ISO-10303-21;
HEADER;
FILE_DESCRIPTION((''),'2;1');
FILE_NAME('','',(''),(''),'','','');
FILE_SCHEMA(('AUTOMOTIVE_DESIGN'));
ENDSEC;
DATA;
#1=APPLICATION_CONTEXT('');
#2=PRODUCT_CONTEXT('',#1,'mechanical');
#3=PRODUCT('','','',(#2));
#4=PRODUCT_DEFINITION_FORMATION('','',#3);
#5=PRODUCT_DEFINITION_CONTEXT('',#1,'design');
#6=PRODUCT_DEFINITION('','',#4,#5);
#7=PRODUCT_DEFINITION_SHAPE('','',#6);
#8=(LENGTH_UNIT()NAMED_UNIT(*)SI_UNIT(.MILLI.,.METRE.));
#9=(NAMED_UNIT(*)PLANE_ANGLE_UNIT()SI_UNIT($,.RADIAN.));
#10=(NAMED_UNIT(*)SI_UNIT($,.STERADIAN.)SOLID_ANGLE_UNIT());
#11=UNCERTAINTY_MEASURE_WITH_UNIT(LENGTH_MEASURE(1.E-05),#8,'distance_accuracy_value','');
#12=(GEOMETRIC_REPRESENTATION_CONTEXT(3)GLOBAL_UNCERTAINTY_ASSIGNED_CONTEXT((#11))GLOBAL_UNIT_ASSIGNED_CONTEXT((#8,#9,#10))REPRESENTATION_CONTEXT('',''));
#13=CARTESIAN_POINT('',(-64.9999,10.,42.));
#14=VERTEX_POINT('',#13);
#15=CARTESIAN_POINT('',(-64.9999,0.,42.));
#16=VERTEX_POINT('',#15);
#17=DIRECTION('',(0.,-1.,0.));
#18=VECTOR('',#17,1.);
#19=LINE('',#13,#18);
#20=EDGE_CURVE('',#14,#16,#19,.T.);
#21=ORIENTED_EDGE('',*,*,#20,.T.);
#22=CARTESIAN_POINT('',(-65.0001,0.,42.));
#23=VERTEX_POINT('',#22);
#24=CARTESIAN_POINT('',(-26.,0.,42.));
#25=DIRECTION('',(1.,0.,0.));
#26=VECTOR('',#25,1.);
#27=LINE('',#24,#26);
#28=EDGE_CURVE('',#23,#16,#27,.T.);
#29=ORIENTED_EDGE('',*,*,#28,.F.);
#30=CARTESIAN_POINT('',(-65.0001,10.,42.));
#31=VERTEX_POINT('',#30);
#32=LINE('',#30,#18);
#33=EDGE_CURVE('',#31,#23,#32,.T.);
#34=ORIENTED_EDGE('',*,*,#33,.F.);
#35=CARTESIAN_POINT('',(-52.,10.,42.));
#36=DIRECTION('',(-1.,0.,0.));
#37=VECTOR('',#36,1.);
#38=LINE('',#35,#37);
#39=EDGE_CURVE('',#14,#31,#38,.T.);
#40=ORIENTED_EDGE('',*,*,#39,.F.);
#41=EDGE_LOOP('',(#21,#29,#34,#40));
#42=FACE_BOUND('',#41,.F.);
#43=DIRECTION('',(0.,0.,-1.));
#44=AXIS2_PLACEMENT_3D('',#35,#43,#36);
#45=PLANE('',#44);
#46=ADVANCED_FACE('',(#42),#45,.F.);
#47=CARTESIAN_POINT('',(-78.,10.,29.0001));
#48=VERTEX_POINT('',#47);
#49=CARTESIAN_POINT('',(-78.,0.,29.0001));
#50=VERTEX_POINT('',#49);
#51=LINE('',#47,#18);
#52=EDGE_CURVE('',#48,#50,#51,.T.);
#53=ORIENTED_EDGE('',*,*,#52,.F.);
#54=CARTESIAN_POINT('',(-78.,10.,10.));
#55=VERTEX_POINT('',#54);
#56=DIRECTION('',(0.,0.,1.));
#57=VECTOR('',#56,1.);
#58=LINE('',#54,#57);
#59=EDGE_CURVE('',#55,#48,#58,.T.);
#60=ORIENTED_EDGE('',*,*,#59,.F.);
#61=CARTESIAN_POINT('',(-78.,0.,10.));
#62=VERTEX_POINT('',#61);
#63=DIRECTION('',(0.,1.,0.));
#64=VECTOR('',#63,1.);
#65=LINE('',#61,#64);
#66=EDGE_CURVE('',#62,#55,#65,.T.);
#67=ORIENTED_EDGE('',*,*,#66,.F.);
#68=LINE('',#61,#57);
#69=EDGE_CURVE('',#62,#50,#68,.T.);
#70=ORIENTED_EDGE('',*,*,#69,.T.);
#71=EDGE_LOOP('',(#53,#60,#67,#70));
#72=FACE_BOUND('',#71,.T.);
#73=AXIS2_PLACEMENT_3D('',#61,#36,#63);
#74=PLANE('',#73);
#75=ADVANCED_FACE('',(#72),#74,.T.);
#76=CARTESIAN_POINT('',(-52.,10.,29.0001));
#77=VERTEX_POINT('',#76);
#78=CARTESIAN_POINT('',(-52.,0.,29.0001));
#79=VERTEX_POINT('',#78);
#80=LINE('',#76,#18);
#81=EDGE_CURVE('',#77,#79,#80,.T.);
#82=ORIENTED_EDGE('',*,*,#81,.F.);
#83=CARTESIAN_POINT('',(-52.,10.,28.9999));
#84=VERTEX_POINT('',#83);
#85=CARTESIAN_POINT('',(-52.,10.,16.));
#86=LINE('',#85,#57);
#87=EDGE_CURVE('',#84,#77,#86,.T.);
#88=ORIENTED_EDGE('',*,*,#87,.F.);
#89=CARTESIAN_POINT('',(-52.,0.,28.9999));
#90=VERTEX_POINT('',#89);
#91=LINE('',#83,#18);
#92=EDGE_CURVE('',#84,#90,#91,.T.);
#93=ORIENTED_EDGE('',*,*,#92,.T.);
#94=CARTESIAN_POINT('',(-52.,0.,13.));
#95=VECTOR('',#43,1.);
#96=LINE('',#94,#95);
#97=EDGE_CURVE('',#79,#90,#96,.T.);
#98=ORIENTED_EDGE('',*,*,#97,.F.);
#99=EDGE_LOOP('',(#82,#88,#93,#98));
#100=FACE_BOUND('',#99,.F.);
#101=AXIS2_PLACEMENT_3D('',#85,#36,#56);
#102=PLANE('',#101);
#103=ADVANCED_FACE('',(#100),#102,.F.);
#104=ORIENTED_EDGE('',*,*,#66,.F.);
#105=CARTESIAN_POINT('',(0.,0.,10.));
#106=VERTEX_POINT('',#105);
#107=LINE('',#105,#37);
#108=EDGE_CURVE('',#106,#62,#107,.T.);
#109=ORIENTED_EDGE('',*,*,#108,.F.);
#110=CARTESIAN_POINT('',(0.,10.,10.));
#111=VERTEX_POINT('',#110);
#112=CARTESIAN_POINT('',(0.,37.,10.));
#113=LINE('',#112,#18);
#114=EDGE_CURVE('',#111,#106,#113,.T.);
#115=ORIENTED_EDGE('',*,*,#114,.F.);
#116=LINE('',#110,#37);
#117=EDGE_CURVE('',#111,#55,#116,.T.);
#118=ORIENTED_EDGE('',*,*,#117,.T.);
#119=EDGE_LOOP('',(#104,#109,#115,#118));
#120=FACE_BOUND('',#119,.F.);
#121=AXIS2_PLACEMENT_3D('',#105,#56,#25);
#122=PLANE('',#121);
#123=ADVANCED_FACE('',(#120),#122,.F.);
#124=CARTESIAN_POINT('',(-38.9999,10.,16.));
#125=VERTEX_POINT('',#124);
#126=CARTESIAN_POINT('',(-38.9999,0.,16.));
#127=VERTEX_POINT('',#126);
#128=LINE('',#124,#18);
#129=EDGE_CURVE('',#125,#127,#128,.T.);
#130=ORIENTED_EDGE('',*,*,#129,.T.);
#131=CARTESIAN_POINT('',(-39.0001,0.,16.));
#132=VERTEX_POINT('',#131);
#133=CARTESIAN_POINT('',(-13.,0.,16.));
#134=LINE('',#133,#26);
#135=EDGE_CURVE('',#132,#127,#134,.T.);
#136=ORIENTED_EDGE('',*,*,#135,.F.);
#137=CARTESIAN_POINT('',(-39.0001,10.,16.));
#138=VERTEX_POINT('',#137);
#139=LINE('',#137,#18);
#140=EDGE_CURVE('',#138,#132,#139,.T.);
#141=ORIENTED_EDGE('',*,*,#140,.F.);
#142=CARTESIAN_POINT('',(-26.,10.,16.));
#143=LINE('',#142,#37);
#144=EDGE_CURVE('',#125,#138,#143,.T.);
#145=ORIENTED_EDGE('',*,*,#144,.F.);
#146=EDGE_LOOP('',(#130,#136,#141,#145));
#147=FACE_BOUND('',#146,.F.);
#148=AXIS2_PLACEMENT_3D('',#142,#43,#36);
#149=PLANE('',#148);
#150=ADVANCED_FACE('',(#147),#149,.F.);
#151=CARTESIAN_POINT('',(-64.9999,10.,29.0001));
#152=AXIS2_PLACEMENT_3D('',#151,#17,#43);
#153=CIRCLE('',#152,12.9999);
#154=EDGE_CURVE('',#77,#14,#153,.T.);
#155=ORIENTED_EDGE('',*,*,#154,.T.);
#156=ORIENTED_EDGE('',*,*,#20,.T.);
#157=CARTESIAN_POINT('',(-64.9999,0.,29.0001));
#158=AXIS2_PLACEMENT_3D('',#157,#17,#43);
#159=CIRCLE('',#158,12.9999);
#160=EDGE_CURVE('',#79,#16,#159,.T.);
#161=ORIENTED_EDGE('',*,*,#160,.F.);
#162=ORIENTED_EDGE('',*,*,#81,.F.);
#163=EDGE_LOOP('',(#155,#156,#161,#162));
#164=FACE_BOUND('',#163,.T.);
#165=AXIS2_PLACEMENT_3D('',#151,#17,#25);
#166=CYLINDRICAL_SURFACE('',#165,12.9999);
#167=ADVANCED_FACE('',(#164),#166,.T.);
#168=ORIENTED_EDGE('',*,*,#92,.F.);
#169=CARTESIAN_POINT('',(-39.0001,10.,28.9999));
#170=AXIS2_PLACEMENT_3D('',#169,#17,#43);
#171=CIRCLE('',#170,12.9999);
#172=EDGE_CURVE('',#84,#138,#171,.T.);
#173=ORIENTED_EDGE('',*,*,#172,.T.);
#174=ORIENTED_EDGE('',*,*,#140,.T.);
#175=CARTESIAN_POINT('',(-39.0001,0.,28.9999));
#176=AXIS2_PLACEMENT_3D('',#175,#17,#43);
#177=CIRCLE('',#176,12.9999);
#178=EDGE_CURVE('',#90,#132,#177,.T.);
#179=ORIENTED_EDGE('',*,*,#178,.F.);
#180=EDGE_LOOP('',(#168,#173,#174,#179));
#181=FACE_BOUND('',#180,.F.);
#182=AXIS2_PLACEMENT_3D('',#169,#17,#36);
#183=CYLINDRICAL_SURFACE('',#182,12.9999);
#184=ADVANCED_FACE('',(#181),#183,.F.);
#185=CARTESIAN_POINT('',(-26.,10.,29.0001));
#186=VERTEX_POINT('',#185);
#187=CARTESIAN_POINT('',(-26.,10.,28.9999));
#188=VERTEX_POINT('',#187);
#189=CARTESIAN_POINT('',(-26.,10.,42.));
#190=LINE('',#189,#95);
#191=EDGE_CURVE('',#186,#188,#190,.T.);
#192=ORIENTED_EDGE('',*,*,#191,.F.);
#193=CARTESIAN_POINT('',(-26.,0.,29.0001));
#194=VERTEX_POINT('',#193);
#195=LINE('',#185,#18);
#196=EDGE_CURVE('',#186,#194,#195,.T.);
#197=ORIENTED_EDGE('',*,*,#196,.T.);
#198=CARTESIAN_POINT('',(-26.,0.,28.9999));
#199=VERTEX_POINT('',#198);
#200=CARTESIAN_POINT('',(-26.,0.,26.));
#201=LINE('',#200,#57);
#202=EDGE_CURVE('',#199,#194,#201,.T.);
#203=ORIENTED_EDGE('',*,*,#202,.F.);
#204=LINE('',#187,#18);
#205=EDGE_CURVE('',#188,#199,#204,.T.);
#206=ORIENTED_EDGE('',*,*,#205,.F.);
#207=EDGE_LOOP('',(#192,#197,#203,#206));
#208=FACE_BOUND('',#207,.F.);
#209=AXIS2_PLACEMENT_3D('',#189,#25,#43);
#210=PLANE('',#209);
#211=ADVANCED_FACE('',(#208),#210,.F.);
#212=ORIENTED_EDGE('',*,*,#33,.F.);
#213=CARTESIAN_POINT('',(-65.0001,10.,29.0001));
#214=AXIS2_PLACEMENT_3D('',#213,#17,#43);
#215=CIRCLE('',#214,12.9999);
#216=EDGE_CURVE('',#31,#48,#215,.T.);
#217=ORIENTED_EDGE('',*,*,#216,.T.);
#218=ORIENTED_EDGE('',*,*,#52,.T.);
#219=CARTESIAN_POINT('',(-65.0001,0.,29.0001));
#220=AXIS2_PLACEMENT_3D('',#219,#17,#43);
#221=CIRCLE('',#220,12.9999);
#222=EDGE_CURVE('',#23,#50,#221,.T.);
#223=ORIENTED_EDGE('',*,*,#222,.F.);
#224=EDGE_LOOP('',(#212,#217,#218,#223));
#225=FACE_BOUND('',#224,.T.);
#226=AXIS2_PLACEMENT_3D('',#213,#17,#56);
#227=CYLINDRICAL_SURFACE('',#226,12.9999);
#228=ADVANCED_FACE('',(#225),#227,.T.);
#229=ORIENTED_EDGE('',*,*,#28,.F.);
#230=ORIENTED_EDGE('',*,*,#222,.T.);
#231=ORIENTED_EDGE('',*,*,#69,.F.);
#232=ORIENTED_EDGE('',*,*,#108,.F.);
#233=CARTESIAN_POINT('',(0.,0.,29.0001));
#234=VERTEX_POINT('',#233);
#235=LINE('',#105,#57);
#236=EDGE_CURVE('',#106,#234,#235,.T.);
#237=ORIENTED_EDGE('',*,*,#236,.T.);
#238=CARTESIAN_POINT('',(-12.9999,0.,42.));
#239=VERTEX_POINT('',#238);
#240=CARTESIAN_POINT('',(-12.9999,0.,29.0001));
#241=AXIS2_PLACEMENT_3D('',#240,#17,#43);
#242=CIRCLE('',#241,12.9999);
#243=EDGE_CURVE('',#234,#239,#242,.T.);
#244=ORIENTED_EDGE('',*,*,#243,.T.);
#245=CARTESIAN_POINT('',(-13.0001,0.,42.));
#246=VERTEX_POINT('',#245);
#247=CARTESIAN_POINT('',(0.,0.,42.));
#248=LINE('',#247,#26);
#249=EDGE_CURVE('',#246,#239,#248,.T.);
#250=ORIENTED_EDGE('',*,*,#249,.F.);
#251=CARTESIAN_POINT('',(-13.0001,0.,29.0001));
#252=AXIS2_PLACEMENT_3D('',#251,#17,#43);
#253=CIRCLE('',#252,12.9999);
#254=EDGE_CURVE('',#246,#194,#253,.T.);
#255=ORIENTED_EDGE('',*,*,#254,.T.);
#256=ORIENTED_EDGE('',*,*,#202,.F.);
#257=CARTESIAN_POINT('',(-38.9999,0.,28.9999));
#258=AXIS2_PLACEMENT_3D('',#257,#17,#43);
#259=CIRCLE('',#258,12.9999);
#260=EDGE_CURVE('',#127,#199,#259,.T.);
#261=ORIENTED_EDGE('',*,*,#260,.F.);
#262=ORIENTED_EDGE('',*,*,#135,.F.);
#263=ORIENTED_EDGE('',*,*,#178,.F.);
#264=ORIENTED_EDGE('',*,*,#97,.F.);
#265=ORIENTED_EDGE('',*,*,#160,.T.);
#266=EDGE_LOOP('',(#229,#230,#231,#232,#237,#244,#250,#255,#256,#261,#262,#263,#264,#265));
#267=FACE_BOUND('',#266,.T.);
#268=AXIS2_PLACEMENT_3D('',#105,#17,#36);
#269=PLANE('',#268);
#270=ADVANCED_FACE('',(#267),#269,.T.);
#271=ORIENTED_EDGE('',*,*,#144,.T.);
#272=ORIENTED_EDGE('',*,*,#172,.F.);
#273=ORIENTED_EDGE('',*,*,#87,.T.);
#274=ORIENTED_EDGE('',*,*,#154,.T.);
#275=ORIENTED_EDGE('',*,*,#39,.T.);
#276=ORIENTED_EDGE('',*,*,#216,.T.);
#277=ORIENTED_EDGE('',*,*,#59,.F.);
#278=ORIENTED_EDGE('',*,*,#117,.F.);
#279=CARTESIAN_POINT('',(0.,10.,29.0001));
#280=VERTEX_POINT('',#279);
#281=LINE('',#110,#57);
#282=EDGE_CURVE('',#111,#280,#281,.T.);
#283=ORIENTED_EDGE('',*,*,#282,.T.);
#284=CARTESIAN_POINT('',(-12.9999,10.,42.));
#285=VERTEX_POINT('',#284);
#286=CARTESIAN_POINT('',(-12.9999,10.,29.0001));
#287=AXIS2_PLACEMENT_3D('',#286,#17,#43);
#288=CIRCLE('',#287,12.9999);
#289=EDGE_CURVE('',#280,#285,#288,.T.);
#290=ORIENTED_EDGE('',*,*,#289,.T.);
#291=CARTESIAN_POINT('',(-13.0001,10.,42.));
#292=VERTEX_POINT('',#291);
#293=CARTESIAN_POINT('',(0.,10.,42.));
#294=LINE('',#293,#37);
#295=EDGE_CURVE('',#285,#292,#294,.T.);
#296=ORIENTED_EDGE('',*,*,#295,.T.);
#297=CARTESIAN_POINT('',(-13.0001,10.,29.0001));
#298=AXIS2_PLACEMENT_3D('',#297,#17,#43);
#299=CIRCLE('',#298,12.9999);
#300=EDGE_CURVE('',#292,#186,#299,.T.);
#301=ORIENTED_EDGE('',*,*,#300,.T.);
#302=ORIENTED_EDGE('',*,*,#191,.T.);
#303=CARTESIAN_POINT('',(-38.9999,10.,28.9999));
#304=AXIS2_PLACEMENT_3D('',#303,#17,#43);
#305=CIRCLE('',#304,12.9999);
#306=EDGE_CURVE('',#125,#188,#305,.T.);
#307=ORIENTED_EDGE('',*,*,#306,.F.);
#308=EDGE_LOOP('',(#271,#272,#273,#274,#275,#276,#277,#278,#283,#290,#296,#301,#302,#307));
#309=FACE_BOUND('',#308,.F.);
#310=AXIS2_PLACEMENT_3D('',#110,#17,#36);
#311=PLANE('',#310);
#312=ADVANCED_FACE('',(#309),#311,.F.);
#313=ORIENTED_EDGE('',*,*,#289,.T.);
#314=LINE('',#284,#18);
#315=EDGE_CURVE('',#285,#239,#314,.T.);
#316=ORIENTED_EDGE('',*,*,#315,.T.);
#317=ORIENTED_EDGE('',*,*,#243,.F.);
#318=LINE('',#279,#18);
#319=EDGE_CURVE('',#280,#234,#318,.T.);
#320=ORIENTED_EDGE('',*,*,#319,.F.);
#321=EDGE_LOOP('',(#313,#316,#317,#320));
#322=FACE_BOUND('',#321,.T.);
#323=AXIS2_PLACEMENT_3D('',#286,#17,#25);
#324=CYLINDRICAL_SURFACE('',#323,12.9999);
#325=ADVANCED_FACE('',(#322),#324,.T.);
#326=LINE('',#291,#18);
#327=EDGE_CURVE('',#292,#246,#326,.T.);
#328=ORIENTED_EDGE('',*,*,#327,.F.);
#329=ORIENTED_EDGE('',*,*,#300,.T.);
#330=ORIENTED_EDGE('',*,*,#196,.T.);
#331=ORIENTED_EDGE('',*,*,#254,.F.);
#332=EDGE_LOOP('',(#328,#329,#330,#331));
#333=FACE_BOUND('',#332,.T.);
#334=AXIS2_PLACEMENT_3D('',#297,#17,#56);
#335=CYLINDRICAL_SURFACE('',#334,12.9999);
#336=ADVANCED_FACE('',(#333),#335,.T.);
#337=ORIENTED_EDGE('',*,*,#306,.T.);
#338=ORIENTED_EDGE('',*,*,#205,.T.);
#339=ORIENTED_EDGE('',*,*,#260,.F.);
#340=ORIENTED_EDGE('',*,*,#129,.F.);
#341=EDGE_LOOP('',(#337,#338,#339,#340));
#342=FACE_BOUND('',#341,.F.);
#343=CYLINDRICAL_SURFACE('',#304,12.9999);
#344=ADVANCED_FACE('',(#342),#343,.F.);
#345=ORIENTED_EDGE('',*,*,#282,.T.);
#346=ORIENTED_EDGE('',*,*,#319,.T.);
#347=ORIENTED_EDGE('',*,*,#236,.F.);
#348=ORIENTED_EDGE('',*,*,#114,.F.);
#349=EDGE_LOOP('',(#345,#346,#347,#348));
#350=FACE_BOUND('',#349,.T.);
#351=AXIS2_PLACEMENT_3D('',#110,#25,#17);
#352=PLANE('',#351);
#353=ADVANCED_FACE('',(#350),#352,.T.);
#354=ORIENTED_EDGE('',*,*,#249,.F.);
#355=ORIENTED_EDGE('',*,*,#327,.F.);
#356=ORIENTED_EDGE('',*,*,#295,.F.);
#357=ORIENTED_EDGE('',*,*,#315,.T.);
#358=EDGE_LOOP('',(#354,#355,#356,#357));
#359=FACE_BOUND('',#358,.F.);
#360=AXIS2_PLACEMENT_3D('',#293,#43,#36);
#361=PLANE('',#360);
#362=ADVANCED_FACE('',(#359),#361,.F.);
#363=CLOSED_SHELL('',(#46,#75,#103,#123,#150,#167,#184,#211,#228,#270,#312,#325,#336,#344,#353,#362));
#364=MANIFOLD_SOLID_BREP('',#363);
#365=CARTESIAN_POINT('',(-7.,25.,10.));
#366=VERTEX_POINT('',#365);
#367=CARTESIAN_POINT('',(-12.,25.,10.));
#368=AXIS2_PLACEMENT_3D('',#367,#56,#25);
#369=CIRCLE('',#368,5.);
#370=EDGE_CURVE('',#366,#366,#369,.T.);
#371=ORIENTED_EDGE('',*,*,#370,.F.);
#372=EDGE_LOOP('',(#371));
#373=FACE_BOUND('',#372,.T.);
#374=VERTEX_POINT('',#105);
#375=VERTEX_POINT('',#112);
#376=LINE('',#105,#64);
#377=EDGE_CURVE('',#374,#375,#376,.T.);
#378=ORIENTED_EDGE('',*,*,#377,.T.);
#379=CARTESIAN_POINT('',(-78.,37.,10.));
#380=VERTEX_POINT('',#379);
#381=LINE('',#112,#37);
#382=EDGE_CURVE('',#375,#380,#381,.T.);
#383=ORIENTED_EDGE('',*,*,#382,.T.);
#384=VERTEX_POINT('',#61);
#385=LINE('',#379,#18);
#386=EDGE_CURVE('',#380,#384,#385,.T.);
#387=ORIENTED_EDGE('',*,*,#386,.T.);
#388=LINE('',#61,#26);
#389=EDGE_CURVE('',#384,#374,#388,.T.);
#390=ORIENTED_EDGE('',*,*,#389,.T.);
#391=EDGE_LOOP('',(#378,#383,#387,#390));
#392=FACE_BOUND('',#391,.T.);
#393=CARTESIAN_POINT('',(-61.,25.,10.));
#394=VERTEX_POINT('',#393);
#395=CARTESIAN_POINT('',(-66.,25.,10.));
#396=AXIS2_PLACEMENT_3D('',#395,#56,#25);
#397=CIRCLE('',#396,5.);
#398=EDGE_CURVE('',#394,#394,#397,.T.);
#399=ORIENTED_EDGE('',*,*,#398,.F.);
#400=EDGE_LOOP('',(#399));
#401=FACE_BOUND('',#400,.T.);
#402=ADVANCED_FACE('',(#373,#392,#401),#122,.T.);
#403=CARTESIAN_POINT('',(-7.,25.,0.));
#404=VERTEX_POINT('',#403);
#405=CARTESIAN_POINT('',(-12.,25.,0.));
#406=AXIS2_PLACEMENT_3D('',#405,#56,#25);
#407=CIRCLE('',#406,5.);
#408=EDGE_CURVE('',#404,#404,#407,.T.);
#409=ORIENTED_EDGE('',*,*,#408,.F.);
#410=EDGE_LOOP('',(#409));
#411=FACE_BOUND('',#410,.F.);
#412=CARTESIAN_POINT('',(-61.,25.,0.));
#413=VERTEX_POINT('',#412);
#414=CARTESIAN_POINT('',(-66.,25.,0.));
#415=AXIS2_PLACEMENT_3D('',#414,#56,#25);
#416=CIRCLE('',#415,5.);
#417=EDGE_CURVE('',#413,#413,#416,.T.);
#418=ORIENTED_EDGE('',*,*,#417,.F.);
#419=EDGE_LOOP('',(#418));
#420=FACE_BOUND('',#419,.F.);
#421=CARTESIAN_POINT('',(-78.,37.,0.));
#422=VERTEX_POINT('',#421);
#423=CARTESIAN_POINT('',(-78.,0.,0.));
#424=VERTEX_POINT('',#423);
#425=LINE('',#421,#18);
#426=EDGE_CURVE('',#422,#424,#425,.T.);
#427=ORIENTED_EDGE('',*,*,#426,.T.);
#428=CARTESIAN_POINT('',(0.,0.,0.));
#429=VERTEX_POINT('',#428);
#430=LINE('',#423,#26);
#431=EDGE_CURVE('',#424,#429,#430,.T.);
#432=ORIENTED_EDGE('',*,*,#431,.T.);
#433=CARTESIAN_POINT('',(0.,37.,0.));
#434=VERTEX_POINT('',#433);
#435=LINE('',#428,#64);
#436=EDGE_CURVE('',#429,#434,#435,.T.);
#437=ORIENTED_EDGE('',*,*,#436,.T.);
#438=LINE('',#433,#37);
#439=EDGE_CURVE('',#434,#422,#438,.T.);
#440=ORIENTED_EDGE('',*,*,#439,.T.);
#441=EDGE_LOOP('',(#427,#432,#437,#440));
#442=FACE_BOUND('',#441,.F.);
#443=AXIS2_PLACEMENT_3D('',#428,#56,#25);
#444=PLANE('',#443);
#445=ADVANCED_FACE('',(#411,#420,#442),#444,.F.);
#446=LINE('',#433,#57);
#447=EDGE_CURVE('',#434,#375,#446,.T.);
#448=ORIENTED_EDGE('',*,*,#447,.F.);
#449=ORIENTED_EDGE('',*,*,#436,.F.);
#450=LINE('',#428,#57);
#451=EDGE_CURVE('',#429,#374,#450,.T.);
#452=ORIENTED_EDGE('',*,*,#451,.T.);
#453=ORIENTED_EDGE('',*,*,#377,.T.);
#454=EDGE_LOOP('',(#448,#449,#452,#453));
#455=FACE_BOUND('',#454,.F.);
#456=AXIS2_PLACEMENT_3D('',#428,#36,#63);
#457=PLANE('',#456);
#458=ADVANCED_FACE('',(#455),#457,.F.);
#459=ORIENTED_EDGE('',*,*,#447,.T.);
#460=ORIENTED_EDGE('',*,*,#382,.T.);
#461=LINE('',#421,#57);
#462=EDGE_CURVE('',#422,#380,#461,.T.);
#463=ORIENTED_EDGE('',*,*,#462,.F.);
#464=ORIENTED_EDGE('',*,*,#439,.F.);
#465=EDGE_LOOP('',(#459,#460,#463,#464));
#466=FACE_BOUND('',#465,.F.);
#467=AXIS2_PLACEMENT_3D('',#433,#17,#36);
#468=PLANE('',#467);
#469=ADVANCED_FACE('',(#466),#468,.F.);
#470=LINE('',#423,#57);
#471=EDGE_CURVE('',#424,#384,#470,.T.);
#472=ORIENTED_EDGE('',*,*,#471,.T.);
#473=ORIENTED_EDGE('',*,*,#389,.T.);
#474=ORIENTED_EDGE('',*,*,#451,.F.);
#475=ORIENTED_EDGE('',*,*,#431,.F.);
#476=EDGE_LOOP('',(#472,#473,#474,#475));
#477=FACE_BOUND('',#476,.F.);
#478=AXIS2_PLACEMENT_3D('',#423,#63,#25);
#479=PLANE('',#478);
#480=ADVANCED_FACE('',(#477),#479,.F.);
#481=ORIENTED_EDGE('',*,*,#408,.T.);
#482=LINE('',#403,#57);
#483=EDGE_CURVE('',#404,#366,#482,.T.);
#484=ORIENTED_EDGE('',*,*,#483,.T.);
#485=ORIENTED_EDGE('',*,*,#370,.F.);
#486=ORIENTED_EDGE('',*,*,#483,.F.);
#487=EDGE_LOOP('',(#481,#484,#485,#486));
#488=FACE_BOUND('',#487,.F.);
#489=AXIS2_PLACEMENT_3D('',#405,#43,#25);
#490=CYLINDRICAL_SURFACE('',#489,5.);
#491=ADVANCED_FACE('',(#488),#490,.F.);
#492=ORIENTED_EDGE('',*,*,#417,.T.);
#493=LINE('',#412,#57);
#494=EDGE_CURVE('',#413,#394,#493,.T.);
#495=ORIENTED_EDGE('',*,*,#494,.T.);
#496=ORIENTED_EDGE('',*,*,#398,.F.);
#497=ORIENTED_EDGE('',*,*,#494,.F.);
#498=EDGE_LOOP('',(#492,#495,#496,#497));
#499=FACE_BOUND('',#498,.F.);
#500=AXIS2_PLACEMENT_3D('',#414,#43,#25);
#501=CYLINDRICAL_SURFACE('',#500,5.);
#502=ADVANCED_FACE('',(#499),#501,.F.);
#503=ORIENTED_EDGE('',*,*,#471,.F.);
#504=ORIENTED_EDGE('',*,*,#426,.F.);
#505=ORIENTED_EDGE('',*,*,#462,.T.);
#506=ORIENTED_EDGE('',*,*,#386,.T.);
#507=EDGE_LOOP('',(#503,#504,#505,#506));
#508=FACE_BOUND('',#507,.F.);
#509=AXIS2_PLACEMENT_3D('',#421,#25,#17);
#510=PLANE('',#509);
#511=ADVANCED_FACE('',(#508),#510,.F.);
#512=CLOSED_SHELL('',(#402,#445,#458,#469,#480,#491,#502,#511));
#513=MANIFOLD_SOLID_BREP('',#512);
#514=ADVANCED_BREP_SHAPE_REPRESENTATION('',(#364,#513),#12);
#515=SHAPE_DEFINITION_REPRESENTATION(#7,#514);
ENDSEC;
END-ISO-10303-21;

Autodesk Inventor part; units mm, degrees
ref_plane "YZ Plane" through (0, 0, 0) normal (1, 0, 0) x (0, 1, 0)
ref_plane "XZ Plane" through (0, 0, 0) normal (0, 1, 0) x (-1, 0, 0)
ref_plane "XY Plane" through (0, 0, 0) normal (0, 0, 1) x (1, 0, 0)
sketch "Sketch1" plane through (0, 0, 0) normal (0, 0, 1) x (1, 0, 0)
  line L0 (0, 37) -> (-78, 37)
  line L1 (-78, 37) -> (-78, 0)
  line L2 (-78, 0) -> (0, 0)
  line L3 (0, 0) -> (0, 37)
  circle A0 centre (-12, 25) radius 5
  circle A1 centre (-66, 25) radius 5
  point P0 (-39, 0)
  dimension "d0" = 78
  dimension "d1" = 37
  dimension "d2" = 10
  dimension "d3" = 12
  dimension "d4" = 12
  dimension "d5" = 12
  dimension "d6" = 12
extrude "Extrusion1" add sketch "Sketch1" along normal blind 10
sketch "Sketch2" plane through (0, 0, 10) normal (0, 0, 1) x (1, 0, 0)
  line L0 (0, 37) -> (0, 0) projected
  line L1 (-78, 0) -> (-78, 37) projected
  line L2 (0, 0) -> (-78, 0) projected
  line L3 (0, 10) -> (-78, 10)
  dimension "d9" = 10
extrude "Extrusion2" add sketch "Sketch2" along normal blind 60 separate body
sketch "Sketch4" plane through (-78, 10, 10) normal (0, 1, 0) x (1, 0, 0)
  line L0 (0, -60) -> (78, -60) projected
  line L1 (78, 0) -> (78, -60) projected
  line L2 (0, 0) -> (0, -60) projected
  line L3 (78, -32) -> (52, -32)
  line L4 (52, -32) -> (52, -6)
  line L5 (52, -6) -> (26, -6)
  line L6 (26, -6) -> (26, -32)
  line L7 (26, -32) -> (0, -32)
  point P0 (78, 10)
  dimension "d12" = 6
  dimension "d13" = 26
extrude "Extrusion4" cut sketch "Sketch4" against normal through all bodies 2
full round fillet "Fillet4" bodies 2 first side at (0, 6.6667, 31.3333) centre faces at (-8.6667, 6.6667, 42) second side at (-26, 6.6667, 33.3333)
full round fillet "Fillet5" bodies 2 first side at (-52, 6.6667, 24.6667) centre faces at (-60.6667, 3.3333, 42) second side at (-78, 3.3333, 31.3333)
full round fillet "Fillet6" bodies 2 first side at (-52, 6.6667, 20.3334) centre faces at (-34.6667, 3.3333, 16) second side at (-26, 3.3333, 24.6667)
properties part number "Guide Bracket"
